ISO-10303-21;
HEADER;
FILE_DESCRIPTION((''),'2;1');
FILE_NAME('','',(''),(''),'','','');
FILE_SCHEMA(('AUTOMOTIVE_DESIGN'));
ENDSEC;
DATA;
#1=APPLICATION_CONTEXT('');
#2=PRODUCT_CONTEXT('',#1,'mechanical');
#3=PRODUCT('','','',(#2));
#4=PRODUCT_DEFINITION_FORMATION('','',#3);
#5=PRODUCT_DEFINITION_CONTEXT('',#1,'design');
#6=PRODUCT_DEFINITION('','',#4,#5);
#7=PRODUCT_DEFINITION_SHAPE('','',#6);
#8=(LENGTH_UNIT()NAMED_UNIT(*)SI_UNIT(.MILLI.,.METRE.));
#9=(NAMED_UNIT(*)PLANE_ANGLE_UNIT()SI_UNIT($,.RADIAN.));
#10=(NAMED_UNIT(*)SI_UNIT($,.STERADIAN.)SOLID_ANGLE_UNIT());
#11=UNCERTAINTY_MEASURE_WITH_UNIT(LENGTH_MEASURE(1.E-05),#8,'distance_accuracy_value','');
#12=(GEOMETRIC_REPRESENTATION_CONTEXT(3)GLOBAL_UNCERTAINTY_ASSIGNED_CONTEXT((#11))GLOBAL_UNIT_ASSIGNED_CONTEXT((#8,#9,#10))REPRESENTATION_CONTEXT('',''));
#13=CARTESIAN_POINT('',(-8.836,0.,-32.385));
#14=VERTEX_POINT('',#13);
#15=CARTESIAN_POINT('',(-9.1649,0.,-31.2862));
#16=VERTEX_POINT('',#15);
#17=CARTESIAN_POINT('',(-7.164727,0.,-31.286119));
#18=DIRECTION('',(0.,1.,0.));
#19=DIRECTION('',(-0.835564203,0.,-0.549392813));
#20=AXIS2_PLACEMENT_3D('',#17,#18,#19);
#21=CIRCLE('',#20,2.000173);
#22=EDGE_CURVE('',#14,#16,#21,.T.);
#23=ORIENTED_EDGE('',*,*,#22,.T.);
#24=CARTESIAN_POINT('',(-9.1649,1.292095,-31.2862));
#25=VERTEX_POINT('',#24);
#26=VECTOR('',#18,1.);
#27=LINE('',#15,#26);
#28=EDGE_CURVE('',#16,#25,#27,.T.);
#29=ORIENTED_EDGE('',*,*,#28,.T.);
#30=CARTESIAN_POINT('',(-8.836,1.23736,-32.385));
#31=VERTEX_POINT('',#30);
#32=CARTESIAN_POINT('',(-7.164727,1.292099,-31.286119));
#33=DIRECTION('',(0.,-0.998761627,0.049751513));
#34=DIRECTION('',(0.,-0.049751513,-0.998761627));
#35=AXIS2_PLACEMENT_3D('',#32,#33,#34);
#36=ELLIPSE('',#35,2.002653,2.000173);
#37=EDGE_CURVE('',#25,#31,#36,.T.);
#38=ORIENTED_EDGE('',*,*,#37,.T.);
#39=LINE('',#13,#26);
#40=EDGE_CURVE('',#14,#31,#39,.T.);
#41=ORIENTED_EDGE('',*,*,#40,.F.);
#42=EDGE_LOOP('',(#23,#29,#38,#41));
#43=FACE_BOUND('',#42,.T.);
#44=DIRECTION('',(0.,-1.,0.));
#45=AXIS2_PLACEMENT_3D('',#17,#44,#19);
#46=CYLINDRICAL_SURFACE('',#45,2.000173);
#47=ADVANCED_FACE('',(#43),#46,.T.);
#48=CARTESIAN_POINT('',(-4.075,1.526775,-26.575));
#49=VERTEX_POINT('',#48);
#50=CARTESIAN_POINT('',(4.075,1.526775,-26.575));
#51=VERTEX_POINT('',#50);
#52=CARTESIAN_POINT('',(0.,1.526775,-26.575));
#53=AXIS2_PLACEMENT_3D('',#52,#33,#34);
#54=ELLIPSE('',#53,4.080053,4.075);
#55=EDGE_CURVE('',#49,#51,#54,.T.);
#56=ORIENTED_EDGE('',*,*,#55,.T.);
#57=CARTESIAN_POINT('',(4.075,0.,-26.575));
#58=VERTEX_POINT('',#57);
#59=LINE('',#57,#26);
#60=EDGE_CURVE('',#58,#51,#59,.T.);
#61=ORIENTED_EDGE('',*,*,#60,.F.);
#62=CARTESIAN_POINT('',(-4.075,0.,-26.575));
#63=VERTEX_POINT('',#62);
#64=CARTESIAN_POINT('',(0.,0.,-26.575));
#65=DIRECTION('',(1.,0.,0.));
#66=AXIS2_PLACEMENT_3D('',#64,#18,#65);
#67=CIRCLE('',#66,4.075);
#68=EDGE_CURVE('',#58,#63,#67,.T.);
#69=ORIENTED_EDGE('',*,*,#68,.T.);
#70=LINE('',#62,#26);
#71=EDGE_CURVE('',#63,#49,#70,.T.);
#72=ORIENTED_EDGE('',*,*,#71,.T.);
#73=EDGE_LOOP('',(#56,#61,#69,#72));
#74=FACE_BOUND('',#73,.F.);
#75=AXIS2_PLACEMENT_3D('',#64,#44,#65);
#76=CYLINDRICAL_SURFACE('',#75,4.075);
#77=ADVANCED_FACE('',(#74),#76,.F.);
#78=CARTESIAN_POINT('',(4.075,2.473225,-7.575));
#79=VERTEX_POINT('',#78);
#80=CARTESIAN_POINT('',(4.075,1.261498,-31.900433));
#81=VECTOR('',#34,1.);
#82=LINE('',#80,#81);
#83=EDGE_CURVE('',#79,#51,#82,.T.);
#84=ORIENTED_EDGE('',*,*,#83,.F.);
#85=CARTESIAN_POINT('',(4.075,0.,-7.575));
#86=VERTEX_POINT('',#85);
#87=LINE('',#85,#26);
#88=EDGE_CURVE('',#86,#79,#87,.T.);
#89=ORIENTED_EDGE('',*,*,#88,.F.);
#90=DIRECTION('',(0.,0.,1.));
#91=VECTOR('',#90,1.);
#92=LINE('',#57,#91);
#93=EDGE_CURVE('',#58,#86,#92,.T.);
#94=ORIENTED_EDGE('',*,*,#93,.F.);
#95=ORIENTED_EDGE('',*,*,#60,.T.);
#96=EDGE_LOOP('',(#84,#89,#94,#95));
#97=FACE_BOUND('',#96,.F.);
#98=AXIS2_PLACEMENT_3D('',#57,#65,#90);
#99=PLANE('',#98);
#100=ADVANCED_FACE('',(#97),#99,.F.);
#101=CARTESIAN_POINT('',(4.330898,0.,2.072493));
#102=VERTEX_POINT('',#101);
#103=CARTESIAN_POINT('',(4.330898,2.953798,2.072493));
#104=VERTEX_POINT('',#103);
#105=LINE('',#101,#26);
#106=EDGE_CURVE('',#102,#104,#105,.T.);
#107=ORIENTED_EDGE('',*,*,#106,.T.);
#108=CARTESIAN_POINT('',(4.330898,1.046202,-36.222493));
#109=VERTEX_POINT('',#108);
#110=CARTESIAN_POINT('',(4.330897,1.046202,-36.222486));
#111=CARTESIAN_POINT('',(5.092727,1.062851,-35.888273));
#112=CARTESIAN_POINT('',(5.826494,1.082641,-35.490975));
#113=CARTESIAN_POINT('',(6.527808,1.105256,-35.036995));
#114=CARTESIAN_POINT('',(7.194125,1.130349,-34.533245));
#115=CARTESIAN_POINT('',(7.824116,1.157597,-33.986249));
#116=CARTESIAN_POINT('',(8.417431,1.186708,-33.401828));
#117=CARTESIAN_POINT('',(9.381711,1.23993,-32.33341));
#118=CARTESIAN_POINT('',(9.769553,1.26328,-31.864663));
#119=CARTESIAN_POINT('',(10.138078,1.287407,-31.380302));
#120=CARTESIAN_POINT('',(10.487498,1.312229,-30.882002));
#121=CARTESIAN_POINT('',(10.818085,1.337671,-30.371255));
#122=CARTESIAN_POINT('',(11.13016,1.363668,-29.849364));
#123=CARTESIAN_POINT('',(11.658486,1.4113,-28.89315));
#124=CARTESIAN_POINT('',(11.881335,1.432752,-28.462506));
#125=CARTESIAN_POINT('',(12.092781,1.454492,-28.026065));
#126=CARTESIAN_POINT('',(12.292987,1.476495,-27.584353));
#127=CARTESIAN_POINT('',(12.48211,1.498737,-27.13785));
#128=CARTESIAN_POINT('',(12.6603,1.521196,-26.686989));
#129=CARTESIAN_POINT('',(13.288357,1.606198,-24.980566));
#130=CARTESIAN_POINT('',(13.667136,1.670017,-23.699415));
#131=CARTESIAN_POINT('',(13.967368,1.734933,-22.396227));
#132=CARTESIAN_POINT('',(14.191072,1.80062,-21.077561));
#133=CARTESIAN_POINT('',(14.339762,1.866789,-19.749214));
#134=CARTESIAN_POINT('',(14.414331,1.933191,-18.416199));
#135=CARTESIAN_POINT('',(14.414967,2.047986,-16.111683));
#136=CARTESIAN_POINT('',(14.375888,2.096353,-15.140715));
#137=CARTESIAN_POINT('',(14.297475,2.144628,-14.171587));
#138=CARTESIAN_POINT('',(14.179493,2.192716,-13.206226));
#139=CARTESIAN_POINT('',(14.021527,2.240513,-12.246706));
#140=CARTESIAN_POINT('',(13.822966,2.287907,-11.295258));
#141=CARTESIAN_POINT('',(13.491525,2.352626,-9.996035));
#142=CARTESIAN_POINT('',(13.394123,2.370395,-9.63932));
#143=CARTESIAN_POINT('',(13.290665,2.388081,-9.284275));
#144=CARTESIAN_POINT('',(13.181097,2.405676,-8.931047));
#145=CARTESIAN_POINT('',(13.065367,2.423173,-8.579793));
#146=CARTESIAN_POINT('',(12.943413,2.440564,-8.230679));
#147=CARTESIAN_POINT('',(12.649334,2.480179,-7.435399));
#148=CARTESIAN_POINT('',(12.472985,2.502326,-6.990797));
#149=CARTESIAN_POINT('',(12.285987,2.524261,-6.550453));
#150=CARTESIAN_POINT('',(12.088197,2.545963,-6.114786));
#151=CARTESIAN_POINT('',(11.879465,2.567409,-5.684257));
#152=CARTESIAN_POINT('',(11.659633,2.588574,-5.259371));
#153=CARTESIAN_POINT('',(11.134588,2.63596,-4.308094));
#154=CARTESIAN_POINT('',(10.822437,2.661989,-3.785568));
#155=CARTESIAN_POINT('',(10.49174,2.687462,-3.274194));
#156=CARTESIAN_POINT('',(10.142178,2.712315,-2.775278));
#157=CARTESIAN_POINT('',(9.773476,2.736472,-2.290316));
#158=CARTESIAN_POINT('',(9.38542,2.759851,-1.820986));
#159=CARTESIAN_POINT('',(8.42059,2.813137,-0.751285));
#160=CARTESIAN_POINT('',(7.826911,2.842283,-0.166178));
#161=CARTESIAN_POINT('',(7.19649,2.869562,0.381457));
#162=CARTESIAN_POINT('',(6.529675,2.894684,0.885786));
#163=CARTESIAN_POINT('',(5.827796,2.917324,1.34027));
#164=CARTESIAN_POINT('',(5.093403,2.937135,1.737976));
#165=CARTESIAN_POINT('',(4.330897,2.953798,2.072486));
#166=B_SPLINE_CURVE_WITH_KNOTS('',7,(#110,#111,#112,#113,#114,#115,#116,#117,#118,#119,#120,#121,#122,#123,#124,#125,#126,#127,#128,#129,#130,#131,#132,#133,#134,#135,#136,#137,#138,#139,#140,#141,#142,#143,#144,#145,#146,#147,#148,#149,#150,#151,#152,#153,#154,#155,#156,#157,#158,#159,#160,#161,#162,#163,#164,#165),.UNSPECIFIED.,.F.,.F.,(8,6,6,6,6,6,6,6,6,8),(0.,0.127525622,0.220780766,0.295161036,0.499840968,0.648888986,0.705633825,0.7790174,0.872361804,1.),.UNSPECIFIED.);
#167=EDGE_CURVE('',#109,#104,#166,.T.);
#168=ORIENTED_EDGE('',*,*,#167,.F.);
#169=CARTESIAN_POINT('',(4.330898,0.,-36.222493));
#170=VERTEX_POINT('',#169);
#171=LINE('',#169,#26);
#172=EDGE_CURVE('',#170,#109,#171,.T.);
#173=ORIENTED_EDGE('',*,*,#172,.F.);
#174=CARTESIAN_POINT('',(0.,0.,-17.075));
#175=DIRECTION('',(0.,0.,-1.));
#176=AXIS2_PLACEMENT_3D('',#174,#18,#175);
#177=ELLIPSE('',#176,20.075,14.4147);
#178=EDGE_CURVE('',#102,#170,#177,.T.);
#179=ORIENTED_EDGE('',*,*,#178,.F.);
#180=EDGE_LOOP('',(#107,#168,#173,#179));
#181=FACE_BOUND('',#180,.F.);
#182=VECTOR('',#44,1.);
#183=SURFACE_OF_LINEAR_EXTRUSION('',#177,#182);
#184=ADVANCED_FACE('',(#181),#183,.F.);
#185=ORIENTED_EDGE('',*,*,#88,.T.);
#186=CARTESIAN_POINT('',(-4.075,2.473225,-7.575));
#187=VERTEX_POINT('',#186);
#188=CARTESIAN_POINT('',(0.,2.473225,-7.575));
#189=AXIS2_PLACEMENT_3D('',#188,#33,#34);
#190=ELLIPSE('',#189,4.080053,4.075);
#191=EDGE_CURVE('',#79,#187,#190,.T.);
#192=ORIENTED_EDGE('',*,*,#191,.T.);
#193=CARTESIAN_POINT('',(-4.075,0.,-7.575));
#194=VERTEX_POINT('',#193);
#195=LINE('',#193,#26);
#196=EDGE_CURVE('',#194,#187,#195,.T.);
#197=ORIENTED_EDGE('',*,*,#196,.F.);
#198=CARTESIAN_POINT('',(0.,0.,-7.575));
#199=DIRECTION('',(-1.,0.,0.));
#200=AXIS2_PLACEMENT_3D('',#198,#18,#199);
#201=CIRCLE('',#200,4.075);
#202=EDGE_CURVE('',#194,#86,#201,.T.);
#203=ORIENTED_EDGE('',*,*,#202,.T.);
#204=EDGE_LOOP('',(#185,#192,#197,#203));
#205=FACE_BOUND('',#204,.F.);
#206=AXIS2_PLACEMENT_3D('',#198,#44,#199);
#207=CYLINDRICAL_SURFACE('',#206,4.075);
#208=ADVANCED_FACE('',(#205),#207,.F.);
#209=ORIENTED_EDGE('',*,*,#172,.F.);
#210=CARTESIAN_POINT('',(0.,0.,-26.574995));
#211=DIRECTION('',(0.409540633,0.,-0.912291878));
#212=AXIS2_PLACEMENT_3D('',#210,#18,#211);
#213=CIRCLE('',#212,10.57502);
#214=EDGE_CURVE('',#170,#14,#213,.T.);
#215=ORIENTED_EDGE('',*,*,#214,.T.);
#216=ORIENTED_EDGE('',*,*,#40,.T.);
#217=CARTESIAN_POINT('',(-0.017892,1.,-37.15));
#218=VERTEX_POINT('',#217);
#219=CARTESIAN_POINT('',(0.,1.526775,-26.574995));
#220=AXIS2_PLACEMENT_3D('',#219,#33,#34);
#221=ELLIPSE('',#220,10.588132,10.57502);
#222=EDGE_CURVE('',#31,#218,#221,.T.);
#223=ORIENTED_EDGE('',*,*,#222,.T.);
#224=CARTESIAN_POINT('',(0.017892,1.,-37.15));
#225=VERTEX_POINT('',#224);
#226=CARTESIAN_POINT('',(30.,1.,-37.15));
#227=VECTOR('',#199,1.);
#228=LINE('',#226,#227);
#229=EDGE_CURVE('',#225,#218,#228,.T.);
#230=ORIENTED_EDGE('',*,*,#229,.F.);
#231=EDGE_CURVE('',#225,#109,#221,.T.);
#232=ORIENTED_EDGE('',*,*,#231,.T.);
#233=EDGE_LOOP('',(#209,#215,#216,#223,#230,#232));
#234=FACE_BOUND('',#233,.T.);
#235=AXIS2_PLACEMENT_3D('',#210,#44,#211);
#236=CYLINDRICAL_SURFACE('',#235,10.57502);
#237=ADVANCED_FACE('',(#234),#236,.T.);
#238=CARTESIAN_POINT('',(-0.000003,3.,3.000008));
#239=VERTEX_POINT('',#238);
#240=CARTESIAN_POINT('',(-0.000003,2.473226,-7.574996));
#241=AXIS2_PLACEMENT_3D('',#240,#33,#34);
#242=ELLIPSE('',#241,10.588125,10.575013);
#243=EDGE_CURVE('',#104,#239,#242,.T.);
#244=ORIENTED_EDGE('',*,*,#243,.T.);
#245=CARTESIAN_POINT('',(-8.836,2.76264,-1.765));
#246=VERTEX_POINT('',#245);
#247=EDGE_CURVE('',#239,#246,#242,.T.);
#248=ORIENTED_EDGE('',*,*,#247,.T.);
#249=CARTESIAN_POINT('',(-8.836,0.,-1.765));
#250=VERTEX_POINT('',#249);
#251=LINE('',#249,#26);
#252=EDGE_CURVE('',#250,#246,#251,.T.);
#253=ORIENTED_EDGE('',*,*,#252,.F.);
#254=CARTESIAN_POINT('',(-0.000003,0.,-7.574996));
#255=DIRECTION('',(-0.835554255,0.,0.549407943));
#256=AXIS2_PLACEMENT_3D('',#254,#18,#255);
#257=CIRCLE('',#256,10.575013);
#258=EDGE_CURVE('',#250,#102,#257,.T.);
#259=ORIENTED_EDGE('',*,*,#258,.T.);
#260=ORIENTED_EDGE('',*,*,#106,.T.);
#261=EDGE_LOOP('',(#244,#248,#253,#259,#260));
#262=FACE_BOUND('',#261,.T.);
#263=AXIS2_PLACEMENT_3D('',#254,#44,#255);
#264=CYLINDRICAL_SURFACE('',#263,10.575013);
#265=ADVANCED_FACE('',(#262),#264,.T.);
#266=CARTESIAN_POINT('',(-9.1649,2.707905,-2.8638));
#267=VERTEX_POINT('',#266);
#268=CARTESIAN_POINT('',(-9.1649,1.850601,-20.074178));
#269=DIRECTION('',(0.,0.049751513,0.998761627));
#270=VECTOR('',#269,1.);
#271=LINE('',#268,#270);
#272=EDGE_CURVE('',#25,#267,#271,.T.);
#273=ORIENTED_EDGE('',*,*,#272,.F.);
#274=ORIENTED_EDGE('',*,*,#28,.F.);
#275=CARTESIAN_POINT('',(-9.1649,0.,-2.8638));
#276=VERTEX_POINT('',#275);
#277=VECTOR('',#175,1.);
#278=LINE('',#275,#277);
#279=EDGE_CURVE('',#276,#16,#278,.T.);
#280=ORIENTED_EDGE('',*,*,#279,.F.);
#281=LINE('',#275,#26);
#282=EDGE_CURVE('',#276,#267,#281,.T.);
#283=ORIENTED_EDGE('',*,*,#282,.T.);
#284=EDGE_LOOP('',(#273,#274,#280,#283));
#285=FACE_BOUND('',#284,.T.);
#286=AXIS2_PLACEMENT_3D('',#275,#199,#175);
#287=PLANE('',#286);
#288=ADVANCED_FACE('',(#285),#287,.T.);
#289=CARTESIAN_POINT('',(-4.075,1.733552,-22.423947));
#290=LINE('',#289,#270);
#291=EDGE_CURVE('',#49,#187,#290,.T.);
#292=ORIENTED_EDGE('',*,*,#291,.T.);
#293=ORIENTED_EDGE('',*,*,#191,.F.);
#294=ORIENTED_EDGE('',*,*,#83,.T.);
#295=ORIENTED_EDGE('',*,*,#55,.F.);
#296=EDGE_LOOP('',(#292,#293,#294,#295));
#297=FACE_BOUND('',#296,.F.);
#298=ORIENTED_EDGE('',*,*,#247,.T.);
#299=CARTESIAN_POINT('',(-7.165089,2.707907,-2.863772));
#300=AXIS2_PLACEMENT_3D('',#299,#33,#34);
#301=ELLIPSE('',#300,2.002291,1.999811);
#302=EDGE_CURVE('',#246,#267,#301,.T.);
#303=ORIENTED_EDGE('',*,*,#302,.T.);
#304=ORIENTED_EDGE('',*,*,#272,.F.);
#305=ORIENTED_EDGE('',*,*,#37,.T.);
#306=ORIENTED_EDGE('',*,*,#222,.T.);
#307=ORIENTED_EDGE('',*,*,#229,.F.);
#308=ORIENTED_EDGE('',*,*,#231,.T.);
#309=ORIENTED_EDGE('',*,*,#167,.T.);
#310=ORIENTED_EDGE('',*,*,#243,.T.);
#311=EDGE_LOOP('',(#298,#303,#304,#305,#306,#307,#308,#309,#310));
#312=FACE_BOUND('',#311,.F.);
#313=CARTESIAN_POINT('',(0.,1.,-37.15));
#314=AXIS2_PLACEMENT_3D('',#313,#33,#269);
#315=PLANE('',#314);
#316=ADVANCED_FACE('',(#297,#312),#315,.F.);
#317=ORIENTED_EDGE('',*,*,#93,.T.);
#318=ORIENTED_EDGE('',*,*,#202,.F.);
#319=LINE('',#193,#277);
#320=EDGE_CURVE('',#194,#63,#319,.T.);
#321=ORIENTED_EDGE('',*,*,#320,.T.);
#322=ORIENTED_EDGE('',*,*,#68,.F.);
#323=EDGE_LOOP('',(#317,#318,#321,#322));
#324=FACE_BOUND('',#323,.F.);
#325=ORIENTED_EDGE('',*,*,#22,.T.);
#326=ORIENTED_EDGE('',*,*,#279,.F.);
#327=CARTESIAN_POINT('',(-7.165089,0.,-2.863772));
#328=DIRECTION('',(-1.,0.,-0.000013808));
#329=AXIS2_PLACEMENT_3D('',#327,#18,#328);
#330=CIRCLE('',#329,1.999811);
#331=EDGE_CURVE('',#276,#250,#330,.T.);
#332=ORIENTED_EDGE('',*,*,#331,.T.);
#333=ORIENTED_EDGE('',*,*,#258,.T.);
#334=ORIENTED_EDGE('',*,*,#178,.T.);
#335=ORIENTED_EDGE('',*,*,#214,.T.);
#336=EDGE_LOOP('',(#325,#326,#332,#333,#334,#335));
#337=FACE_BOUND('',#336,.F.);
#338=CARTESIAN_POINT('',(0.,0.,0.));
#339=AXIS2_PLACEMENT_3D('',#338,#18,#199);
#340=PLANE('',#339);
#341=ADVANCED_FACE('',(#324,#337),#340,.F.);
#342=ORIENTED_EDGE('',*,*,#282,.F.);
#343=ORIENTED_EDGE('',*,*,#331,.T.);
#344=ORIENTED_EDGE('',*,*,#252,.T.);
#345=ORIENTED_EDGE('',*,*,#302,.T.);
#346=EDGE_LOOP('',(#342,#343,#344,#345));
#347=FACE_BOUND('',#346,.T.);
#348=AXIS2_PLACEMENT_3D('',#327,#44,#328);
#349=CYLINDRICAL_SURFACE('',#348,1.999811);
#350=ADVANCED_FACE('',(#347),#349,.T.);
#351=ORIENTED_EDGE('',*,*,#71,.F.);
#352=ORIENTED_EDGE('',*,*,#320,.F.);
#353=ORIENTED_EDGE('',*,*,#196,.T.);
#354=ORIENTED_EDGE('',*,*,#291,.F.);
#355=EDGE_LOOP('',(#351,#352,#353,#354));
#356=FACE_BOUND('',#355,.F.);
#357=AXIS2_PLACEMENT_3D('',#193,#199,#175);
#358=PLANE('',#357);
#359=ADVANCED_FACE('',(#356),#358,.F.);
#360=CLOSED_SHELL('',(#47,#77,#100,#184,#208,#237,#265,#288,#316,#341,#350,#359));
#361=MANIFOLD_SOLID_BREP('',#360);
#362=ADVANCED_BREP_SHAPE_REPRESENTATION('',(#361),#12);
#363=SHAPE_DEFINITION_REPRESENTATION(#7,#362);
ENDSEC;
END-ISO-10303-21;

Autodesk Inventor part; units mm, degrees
ref_plane "YZ Plane" through (0, 0, 0) normal (1, 0, 0) x (0, 1, 0)
ref_plane "XZ Plane" through (0, 0, 0) normal (0, 1, 0) x (-1, 0, 0)
ref_plane "XY Plane" through (0, 0, 0) normal (0, 0, 1) x (1, 0, 0)
sketch "Sketch1" plane through (0, 0, 0) normal (0, 1, 0) x (-1, 0, 0)
  line L0 (0, 0) -> (0, -34.15) construction
  arc A0 (6.6649, -3.975) -> (-7.575, -7.575) centre (0, -7.575) ccw construction
  arc A1 (-7.575, -26.575) -> (6.6649, -30.175) centre (0, -26.575) ccw construction
  line L1 (4.075, -7.575) -> (4.075, -26.575) construction
  arc A2 (-4.075, -26.575) -> (4.075, -26.575) centre (0, -26.575) ccw construction
  line L2 (-4.075, -26.575) -> (-4.075, -7.575) construction
  arc A3 (4.075, -7.575) -> (-4.075, -7.575) centre (0, -7.575) ccw construction
  line L3 (9.1649, -3.975) -> (9.1649, -30.175) construction
  line L4 (9.1649, -3.975) -> (6.6649, -3.975) construction
  line L5 (9.1649, -30.175) -> (6.6649, -30.175) construction
  line L6 (-10.575, -14.075) -> (-10.575, -20.075) construction
  line L7 (0, -17.075) -> (-19.3792, -17.075) construction
  line L8 (-4.075, -20.075) -> (-4.075, -24.075) construction
  line L9 (-10.575, -20.075) -> (-7.575, -21.8932) construction
  line L10 (-10.575, -14.075) -> (-7.575, -12.2568) construction
  line L11 (-7.575, -7.575) -> (-7.575, -12.2568) construction
  line L12 (-7.575, -21.8932) -> (-7.575, -26.575) construction
  line L13 (-10.575, -17.075) -> (-16.875, -17.075) construction
  line L14 (-10.575, -14.075) -> (-14.875, -14.075) construction
  line L15 (-16.875, -16.075) -> (-16.875, -18.075) construction
  line L16 (-14.875, -20.075) -> (-10.575, -20.075) construction
  arc A4 (-14.875, -14.075) -> (-16.875, -16.075) centre (-14.875, -16.075) ccw construction
  arc A5 (-16.875, -18.075) -> (-14.875, -20.075) centre (-14.875, -18.075) ccw construction
  line L17 (-6.7059, -17.075) -> (-6.7059, -23.075) construction
  line L18 (-6.7059, -17.075) -> (-6.7059, -11.075) construction
  line L19 (-7.575, -11.075) -> (-14.875, -11.075) construction
  line L20 (-16.875, -13.075) -> (-16.875, -21.075) construction
  line L21 (-14.875, -23.075) -> (-7.575, -23.075) construction
  arc A6 (-14.875, -11.075) -> (-16.875, -13.075) centre (-14.875, -13.075) ccw construction
  arc A7 (-16.875, -21.075) -> (-14.875, -23.075) centre (-14.875, -21.075) ccw construction
  line L22 (19.3047, -16.075) -> (19.3047, -18.075) construction
  line L23 (17.3047, -14.075) -> (13.3047, -14.075) construction
  line L24 (17.3047, -20.075) -> (13.3047, -20.075) construction
  line L25 (9.1649, -16.075) -> (9.1649, -22.575) construction
  line L26 (9.1649, -17.075) -> (9.1649, -11.575) construction
  line L27 (9.1649, -11.575) -> (13.3047, -14.075) construction
  line L28 (9.1649, -22.575) -> (13.3047, -20.075) construction
  arc A8 (19.3047, -16.075) -> (17.3047, -14.075) centre (17.3047, -16.075) ccw construction
  arc A9 (17.3047, -20.075) -> (19.3047, -18.075) centre (17.3047, -18.075) ccw construction
  line L29 (9.1649, -30.175) -> (9.1649, -26.175) construction
  line L30 (9.1649, -3.975) -> (9.1649, -7.975) construction
  line L31 (9.1649, -24.9114) -> (13.8618, -22.075) construction
  line L32 (13.8618, -22.075) -> (17.3047, -22.075) construction
  arc A10 (17.3047, -22.075) -> (21.3047, -18.075) centre (17.3047, -18.075) ccw construction
  line L33 (21.3047, -18.075) -> (21.3047, -16.075) construction
  arc A11 (21.3047, -16.075) -> (17.3047, -12.075) centre (17.3047, -16.075) ccw construction
  line L34 (17.3047, -12.075) -> (13.8618, -12.075) construction
  line L35 (13.8618, -12.075) -> (9.1649, -9.2386) construction
  point P0 (7.575, -17.075)
  point P1 (-4.075, -10.075)
  point P2 (19.3047, -14.075)
  point P3 (19.3047, -20.075)
  dimension "d0" = 34.15
  dimension "d1" = 15.15
  dimension "d5" = 6
  dimension "d7" = 4
  dimension "d8" = 2.5
  dimension "d9" = 3.5
  dimension "d10" = 8.15
  dimension "d12" = 2
  dimension "d14" = 6
  dimension "d15" = 6
  dimension "d16" = 2
  dimension "d18" = 6
  dimension "d19" = 6
  dimension "d20" = 5.5
  dimension "d21" = 5.5
  dimension "d23" = 4
  dimension "d24" = 4
  dimension "d25" = 2
sketch "Sketch3" plane through (0, 0, 0) normal (0, 1, 0) x (-1, 0, 0)
  arc A0 (6.6649, -3.975) -> (-7.575, -7.575) centre (0, -7.575) ccw construction
  arc A1 (-7.575, -26.575) -> (6.6649, -30.175) centre (0, -26.575) ccw construction
  arc A2 (-4.075, -26.575) -> (4.075, -26.575) centre (0, -26.575) ccw projected
  line L0 (4.075, -7.575) -> (4.075, -26.575) projected
  arc A3 (4.075, -7.575) -> (-4.075, -7.575) centre (0, -7.575) ccw projected
  line L1 (-4.075, -26.575) -> (-4.075, -7.575) projected
  line L2 (9.1649, -3.975) -> (9.1649, -30.175) construction
  line L3 (-10.575, -14.075) -> (-10.575, -20.075) construction
  line L4 (-16.875, -16.075) -> (-16.875, -18.075) construction
  arc A4 (8.836, -1.765) -> (-4.3309, 2.0725) centre (0, -7.575) ccw
  arc A5 (-4.3309, -36.2225) -> (8.836, -32.385) centre (0, -26.575) ccw
  line L5 (9.1649, -2.8638) -> (9.1649, -31.2862)
  arc A6 (9.1649, -2.8638) -> (8.836, -1.765) centre (7.1649, -2.8638) ccw
  arc A7 (8.836, -32.385) -> (9.1649, -31.2862) centre (7.1649, -31.2862) ccw
  line L6 (-12.075, -10.8843) -> (-12.075, -24.6972)
  ellipse E0 centre (0, -17.075) end of major axis (0, -37.15) minor radius 14.4147 (-4.3309, 2.0725) -> (-4.3309, -36.2225) ccw
  point P0 (0, 0)
  point P1 (9.1649, -2.2991)
  point P2 (9.1649, -31.8509)
  dimension "d26" = 3
  dimension "d27" = 3
  dimension "d28" = 2
  dimension "d29" = 6.5
  dimension "d30" = 8
extrude "Extrusion1" add sketch "Sketch3" along normal blind 3
ref_plane "Work Plane1" through (0, 1, 3) normal (1, 0, 0) x (0, 0, -1)
sketch "Sketch8" plane through (0, 1, 3) normal (1, 0, 0) x (0, 0, -1)
  line L0 (40.15, 2) -> (40.15, -1) projected
  line L1 (40.15, -1) -> (33.65, -1) projected
  line L2 (33.65, -1) -> (33.65, 2) projected
  line L3 (33.65, 2) -> (40.15, 2) projected
  line L4 (0, -1) -> (0, 2) projected
  line L5 (0, 2) -> (6.5, 2) projected
  line L6 (6.5, 2) -> (6.5, -1) projected
  line L7 (6.5, -1) -> (0, -1) projected
  line L8 (40.15, -1) -> (40.15, 0)
  line L9 (40.15, -1) -> (40.15, 2) projected
  line L10 (40.15, 0) -> (0, 2)
  line L11 (4.765, 2) -> (0, 2) projected
  line L12 (40.15, 2) -> (35.385, 2) projected
  line L13 (0, 2) -> (40.15, 2)
  line L14 (40.15, 2) -> (40.15, 0)
  point P0 (3, -1)
  point P1 (0.9275, 2)
  point P2 (39.2225, 2)
  dimension "d38" = 1
extrude "Extrusion3" cut sketch "Sketch8" along normal blind 30 and the other way blind 30 contours L0 L10 L2 L3 | L10 L6 L13 L2 | L10 L5 L6
properties part number "SPD_MTB_cleat_new_3mm_01mm"
